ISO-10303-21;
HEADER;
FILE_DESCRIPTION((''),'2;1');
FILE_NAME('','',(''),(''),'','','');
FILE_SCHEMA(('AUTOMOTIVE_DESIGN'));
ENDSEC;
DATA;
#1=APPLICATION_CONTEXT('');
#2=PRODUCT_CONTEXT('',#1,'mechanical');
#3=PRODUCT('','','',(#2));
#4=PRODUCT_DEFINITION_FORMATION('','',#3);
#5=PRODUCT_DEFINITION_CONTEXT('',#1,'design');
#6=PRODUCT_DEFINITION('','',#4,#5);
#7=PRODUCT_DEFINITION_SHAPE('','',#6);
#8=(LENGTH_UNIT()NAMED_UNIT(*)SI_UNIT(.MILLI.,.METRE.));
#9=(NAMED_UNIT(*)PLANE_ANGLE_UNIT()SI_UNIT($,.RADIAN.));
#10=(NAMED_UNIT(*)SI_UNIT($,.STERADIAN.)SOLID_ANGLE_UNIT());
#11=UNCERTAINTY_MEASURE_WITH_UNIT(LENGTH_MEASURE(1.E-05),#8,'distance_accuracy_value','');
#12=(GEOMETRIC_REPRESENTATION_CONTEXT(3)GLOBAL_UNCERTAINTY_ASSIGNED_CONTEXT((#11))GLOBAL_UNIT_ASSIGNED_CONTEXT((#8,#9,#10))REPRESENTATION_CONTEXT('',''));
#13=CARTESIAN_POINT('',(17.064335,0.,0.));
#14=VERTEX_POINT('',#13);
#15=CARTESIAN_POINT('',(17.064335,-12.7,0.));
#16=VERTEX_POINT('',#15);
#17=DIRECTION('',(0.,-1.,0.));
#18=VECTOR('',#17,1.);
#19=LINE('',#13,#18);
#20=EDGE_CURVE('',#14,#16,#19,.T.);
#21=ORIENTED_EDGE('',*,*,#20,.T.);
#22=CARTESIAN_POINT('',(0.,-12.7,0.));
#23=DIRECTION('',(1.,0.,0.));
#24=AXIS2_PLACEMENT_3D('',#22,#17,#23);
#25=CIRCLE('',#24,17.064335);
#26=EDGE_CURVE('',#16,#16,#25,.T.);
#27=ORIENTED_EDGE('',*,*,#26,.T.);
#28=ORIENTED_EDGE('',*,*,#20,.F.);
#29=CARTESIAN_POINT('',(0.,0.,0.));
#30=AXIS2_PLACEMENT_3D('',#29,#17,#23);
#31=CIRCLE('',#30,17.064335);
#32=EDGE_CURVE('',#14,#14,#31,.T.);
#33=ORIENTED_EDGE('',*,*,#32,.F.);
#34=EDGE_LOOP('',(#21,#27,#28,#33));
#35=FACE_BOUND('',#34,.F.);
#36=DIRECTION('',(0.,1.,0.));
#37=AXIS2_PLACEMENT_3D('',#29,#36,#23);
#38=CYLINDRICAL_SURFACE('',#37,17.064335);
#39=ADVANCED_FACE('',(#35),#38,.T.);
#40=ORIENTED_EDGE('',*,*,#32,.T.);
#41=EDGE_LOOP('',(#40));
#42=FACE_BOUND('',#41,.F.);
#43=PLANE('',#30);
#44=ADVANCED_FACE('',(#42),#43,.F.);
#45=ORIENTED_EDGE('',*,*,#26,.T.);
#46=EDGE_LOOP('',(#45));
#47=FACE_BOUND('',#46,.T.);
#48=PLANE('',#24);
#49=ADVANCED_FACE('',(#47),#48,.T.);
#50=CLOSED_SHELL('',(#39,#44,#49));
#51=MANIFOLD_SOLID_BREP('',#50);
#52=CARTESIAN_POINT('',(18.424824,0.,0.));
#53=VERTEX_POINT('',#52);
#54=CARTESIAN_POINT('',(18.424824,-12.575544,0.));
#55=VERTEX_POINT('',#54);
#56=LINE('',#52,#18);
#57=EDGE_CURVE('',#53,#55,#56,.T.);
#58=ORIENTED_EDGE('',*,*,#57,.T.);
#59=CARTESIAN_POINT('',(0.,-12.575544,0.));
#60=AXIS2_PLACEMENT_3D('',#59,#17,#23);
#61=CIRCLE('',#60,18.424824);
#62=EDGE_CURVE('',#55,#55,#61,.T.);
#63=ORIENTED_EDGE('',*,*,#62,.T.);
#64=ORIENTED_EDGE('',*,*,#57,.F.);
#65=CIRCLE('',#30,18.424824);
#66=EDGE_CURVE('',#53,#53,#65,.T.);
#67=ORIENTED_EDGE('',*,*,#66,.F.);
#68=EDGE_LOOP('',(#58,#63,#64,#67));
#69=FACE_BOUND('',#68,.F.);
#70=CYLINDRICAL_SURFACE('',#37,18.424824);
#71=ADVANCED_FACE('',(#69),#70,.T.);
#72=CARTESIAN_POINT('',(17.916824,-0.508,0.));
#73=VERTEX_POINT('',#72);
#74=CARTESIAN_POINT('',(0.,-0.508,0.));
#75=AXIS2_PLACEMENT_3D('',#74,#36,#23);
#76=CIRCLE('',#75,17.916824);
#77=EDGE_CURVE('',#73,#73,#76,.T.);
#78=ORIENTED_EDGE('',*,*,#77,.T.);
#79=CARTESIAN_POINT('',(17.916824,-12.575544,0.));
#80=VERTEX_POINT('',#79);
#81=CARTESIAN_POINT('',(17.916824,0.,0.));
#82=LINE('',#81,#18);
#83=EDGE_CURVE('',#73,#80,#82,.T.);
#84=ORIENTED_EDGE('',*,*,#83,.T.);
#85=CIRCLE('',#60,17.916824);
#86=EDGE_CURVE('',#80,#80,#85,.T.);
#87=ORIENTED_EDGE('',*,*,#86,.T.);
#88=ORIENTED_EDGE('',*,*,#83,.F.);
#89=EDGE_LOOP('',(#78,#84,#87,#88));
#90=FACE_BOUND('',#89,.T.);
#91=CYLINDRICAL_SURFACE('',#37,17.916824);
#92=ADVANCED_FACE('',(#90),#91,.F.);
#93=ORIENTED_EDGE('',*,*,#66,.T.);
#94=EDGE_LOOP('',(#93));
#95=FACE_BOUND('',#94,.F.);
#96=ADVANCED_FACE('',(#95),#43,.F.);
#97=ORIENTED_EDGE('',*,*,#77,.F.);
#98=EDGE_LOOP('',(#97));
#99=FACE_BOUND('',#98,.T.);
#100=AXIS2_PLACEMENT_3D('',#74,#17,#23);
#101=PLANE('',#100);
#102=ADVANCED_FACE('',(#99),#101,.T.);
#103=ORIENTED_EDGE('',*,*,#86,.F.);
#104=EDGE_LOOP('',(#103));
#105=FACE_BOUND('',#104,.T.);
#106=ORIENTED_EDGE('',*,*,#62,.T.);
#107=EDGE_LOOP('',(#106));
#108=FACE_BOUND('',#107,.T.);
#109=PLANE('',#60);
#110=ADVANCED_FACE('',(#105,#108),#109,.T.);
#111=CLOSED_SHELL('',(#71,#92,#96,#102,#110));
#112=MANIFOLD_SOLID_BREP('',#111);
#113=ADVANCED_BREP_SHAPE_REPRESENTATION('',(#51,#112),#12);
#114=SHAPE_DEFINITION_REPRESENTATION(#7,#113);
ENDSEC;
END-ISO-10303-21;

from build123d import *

# Parameters (mm, degrees)
F0_R     = 17.0643351891
F1_DEPTH = 12.7
F5_R     = 18.4248242349
F6_DEPTH = 12.5755444169
F7_T     = -0.508


# Not quite as in the source:
# - the program builds the solid bodies; features that only make, move or delete a surface that nothing else refers to are left out


with BuildPart() as f1:
    # F0 (on Front) → F1 (new body)
    with BuildSketch(Plane.XZ):
        Circle(F0_R)
    extrude(amount=F1_DEPTH)


with BuildPart() as f6:
    # F5 (on Front) → F6 (new body)
    with BuildSketch(Plane.XZ):
        Circle(F5_R)
    extrude(amount=F6_DEPTH)

    # F7
    f7_openings = [f6.faces().sort_by_distance(p)[0] for p in [
        (0, -12.575544, 0),
    ]]
    offset(amount=F7_T, openings=f7_openings)


solid = Compound([f1.part, f6.part])
